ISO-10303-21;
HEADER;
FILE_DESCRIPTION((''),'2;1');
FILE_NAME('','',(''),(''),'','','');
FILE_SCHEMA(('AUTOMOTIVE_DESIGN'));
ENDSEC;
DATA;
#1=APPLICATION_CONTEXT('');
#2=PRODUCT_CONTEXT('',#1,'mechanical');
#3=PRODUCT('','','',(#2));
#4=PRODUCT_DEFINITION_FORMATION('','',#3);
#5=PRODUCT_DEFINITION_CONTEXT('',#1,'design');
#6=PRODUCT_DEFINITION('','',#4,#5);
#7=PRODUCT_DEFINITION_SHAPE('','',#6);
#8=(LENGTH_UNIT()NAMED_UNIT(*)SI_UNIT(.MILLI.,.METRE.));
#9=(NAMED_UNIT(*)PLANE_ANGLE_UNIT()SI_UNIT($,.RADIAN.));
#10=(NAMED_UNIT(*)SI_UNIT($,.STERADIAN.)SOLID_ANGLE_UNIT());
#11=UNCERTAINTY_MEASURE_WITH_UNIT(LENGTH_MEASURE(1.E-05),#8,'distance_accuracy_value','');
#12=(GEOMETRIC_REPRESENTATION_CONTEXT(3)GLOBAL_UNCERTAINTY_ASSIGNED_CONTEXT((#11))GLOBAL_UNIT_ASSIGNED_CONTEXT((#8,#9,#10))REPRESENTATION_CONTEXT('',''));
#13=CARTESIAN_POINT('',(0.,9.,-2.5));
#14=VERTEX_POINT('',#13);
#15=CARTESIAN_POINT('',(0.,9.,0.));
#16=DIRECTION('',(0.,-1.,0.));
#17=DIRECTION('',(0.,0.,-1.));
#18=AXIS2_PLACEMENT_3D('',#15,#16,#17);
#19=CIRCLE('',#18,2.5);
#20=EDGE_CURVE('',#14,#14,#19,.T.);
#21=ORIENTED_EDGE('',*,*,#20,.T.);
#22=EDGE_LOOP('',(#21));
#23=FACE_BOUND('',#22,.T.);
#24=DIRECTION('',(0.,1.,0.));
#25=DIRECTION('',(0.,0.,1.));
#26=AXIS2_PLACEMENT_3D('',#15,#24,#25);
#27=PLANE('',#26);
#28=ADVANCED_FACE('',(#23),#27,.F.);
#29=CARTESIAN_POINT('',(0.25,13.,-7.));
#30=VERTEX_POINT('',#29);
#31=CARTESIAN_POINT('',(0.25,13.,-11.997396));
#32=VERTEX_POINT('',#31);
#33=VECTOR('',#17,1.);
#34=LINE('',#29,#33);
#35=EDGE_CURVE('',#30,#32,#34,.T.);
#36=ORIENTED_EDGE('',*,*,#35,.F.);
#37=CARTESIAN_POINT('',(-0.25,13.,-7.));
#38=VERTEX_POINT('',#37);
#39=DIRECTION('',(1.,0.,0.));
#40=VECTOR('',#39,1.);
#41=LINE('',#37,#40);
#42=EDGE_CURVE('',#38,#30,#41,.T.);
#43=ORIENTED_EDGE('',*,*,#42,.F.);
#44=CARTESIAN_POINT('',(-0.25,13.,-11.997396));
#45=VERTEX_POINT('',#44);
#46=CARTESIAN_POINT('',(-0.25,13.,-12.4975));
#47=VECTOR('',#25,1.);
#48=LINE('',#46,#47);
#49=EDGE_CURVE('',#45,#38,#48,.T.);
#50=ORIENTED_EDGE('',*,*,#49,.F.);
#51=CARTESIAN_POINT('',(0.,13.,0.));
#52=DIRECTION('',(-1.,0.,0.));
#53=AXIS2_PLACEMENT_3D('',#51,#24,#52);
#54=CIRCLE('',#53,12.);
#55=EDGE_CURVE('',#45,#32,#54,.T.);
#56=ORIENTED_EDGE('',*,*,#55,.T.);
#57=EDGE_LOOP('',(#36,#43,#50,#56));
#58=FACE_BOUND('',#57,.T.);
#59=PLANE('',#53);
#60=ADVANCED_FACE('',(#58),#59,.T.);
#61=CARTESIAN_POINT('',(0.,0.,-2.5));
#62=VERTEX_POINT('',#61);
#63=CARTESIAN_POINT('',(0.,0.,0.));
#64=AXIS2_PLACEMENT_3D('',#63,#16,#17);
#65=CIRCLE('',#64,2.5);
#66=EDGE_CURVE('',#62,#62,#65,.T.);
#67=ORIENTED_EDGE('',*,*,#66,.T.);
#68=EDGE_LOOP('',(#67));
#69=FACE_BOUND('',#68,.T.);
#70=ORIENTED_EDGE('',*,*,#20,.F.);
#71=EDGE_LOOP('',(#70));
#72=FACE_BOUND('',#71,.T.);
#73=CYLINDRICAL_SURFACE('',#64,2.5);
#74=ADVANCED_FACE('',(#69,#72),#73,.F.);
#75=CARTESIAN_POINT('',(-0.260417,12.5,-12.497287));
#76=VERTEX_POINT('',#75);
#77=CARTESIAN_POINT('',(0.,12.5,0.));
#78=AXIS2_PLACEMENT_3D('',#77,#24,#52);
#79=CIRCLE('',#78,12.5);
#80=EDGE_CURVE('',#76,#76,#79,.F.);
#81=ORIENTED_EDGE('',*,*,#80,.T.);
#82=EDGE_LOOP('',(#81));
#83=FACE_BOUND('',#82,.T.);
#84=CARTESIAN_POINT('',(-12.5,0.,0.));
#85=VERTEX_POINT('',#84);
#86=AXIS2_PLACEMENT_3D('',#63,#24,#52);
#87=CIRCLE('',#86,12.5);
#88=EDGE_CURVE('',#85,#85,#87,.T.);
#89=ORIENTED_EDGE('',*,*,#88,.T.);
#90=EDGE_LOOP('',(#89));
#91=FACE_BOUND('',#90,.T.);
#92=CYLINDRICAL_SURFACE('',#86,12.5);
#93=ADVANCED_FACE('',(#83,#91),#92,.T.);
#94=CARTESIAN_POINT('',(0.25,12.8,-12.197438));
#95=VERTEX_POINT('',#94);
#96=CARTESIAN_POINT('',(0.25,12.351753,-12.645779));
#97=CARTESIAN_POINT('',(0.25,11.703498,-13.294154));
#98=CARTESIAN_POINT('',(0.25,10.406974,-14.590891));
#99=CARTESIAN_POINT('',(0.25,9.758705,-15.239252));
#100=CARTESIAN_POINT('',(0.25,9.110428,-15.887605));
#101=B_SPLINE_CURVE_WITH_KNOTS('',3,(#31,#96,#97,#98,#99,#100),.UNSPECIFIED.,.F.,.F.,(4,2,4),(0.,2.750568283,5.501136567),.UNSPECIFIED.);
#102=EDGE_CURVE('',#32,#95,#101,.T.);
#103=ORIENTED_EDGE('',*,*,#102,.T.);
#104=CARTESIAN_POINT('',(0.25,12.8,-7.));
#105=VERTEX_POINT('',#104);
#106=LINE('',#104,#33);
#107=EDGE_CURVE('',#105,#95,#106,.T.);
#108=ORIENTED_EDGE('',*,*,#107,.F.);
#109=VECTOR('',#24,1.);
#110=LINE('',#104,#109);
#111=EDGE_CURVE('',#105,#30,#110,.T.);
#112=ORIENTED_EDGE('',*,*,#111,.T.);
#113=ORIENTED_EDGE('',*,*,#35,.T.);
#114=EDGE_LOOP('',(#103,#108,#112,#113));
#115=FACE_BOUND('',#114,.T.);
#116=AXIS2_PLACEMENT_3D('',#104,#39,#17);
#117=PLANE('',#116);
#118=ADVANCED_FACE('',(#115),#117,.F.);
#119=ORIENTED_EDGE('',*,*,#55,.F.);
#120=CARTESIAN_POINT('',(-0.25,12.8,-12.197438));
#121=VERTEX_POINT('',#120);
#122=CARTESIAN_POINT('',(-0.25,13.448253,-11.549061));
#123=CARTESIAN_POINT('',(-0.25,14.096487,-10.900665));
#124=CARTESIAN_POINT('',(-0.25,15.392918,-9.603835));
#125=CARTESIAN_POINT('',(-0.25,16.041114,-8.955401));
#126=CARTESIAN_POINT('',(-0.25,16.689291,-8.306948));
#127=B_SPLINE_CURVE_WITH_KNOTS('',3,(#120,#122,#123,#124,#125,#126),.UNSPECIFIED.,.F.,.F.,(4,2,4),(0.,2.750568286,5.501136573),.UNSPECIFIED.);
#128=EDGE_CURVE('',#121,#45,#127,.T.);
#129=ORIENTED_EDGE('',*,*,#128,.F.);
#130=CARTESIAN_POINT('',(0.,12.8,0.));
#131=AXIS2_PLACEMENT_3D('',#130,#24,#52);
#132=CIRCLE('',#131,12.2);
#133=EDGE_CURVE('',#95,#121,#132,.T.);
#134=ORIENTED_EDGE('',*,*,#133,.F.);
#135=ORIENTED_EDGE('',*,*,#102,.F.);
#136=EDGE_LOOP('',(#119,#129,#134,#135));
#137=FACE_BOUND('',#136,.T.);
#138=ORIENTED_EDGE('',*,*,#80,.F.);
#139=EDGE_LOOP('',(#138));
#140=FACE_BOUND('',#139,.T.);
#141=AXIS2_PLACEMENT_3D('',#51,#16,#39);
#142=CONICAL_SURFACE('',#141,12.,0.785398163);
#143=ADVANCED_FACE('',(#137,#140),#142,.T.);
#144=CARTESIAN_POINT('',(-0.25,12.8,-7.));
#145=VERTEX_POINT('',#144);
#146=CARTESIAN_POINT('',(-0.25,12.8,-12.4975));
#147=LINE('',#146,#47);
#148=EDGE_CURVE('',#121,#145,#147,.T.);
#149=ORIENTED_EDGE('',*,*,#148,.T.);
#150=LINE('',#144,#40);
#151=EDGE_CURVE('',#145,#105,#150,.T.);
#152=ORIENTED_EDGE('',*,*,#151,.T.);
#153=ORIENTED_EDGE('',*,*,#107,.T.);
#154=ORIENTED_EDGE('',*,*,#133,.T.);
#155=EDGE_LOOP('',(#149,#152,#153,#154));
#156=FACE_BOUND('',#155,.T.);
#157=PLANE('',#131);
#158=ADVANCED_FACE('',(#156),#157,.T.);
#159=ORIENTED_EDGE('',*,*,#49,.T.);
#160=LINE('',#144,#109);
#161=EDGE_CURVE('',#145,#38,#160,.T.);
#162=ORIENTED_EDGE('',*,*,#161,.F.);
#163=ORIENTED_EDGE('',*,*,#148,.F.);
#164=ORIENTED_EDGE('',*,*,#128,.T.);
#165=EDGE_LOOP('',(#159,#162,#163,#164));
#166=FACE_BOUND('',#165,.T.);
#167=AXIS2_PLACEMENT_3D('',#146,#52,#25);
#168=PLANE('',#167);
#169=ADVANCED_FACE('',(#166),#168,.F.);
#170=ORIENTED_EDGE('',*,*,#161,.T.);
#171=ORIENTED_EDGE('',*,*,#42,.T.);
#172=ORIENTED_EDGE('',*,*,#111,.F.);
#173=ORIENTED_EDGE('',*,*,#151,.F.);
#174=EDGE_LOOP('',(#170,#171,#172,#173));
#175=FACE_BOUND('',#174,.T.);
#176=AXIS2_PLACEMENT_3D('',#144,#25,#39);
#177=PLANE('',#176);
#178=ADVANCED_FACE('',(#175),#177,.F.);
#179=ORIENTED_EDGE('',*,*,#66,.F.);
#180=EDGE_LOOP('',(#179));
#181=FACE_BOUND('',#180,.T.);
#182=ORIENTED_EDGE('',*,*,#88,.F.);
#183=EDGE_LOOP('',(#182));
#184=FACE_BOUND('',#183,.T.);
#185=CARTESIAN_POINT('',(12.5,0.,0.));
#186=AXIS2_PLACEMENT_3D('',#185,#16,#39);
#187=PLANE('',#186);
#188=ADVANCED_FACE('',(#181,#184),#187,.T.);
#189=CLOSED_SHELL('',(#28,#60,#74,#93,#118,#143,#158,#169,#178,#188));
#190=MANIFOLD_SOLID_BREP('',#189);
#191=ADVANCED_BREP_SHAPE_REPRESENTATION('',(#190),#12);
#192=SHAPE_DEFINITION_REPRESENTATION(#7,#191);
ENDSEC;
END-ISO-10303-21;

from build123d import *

# Parameters (mm, degrees)
CROQUIS1_W                        = 12.5
CROQUIS1_H                        = 13
CORTAR_EXTRUIR1_START             = -0.2
CORTAR_EXTRUIR1_DEPTH             = 0.2
DI_METRO_DE_TALADRO_5_0_5_1_D     = 5
DI_METRO_DE_TALADRO_5_0_5_1_DEPTH = 9
CHAFL_N1_SIZE                     = 0.2
CROQUIS5_R                        = 2.5
SALIENTE_EXTRUIR1_DEPTH           = 10


with BuildPart() as part:
    # Croquis1 → Revolución1 (revolve)
    with BuildSketch(Plane(origin=(0, 0, 0), x_dir=(-1, 0, 0), z_dir=(0, 0, -1)), mode=Mode.PRIVATE) as revoluci_n1_sk:
        with Locations((-6.25, 6.5)):
            Rectangle(CROQUIS1_W, CROQUIS1_H)
    revolve(revoluci_n1_sk.sketch.rotate(Axis((0, 0, 0), (0, 1, 0)), 180), axis=Axis((0, 0, 0), (0, 1, 0)))

    # Croquis2 → Cortar-Extruir1 (cut)
    with BuildSketch(Plane(origin=(0, 13, 0), x_dir=(-1, 0, 0), z_dir=(0, 1, 0)).offset(CORTAR_EXTRUIR1_START)):
        with BuildLine():
            Line((0.25, -12.49749975), (0.25, -7))
            Line((0.25, -7), (-0.25, -7))
            Line((-0.25, -7), (-0.25, -12.49749975))
            ThreePointArc((-0.25, -12.49749975), (0, -12.5), (0.25, -12.49749975))
        make_face()
    extrude(amount=CORTAR_EXTRUIR1_DEPTH, mode=Mode.SUBTRACT)

    # Diámetro de taladro Ø5.0 (5)1
    with Locations(Plane(origin=(0, 0, 0), x_dir=(-1, 0, 0), z_dir=(0, -1, 0))):
        with Locations((0, 0)):
            Hole(DI_METRO_DE_TALADRO_5_0_5_1_D / 2, depth=DI_METRO_DE_TALADRO_5_0_5_1_DEPTH)

    # Chaflán1
    chafl_n1_edges = [part.edges().sort_by_distance(p)[0] for p in [
        (8.75, 13, 8.926785536),
    ]]
    chamfer(chafl_n1_edges, length=CHAFL_N1_SIZE)

    # Croquis5 → Saliente-Extruir1 (add)
    with BuildSketch(Plane(origin=(0, 13, 0), x_dir=(-1, 0, 0), z_dir=(0, 1, 0))):
        with BuildLine():
            Line((0.25, -7), (-0.25, -7))
            Line((-0.25, -7), (-0.25, -12.49749975))
            ThreePointArc((-0.25, -12.49749975), (0, 12.5), (0.25, -12.49749975))
            Line((0.25, -12.49749975), (0.25, -7))
        make_face()
        with Locations(Location((0, 0, 0), (0, 0, 270))):
            Circle(CROQUIS5_R, mode=Mode.SUBTRACT)
    extrude(amount=-SALIENTE_EXTRUIR1_DEPTH)

    # Chaflán2: read off the stored shape, not the designer's step
    # Chaflán2 outline → Chaflán2 (revolve, cut)
    with BuildSketch(Plane.XY):
        Polygon((12.5, 13), (12, 13), (12.5, 12.5), align=None)
    revolve(axis=Axis((0, 0, 0), (0, 1, 0)), mode=Mode.SUBTRACT)


solid = part.part
